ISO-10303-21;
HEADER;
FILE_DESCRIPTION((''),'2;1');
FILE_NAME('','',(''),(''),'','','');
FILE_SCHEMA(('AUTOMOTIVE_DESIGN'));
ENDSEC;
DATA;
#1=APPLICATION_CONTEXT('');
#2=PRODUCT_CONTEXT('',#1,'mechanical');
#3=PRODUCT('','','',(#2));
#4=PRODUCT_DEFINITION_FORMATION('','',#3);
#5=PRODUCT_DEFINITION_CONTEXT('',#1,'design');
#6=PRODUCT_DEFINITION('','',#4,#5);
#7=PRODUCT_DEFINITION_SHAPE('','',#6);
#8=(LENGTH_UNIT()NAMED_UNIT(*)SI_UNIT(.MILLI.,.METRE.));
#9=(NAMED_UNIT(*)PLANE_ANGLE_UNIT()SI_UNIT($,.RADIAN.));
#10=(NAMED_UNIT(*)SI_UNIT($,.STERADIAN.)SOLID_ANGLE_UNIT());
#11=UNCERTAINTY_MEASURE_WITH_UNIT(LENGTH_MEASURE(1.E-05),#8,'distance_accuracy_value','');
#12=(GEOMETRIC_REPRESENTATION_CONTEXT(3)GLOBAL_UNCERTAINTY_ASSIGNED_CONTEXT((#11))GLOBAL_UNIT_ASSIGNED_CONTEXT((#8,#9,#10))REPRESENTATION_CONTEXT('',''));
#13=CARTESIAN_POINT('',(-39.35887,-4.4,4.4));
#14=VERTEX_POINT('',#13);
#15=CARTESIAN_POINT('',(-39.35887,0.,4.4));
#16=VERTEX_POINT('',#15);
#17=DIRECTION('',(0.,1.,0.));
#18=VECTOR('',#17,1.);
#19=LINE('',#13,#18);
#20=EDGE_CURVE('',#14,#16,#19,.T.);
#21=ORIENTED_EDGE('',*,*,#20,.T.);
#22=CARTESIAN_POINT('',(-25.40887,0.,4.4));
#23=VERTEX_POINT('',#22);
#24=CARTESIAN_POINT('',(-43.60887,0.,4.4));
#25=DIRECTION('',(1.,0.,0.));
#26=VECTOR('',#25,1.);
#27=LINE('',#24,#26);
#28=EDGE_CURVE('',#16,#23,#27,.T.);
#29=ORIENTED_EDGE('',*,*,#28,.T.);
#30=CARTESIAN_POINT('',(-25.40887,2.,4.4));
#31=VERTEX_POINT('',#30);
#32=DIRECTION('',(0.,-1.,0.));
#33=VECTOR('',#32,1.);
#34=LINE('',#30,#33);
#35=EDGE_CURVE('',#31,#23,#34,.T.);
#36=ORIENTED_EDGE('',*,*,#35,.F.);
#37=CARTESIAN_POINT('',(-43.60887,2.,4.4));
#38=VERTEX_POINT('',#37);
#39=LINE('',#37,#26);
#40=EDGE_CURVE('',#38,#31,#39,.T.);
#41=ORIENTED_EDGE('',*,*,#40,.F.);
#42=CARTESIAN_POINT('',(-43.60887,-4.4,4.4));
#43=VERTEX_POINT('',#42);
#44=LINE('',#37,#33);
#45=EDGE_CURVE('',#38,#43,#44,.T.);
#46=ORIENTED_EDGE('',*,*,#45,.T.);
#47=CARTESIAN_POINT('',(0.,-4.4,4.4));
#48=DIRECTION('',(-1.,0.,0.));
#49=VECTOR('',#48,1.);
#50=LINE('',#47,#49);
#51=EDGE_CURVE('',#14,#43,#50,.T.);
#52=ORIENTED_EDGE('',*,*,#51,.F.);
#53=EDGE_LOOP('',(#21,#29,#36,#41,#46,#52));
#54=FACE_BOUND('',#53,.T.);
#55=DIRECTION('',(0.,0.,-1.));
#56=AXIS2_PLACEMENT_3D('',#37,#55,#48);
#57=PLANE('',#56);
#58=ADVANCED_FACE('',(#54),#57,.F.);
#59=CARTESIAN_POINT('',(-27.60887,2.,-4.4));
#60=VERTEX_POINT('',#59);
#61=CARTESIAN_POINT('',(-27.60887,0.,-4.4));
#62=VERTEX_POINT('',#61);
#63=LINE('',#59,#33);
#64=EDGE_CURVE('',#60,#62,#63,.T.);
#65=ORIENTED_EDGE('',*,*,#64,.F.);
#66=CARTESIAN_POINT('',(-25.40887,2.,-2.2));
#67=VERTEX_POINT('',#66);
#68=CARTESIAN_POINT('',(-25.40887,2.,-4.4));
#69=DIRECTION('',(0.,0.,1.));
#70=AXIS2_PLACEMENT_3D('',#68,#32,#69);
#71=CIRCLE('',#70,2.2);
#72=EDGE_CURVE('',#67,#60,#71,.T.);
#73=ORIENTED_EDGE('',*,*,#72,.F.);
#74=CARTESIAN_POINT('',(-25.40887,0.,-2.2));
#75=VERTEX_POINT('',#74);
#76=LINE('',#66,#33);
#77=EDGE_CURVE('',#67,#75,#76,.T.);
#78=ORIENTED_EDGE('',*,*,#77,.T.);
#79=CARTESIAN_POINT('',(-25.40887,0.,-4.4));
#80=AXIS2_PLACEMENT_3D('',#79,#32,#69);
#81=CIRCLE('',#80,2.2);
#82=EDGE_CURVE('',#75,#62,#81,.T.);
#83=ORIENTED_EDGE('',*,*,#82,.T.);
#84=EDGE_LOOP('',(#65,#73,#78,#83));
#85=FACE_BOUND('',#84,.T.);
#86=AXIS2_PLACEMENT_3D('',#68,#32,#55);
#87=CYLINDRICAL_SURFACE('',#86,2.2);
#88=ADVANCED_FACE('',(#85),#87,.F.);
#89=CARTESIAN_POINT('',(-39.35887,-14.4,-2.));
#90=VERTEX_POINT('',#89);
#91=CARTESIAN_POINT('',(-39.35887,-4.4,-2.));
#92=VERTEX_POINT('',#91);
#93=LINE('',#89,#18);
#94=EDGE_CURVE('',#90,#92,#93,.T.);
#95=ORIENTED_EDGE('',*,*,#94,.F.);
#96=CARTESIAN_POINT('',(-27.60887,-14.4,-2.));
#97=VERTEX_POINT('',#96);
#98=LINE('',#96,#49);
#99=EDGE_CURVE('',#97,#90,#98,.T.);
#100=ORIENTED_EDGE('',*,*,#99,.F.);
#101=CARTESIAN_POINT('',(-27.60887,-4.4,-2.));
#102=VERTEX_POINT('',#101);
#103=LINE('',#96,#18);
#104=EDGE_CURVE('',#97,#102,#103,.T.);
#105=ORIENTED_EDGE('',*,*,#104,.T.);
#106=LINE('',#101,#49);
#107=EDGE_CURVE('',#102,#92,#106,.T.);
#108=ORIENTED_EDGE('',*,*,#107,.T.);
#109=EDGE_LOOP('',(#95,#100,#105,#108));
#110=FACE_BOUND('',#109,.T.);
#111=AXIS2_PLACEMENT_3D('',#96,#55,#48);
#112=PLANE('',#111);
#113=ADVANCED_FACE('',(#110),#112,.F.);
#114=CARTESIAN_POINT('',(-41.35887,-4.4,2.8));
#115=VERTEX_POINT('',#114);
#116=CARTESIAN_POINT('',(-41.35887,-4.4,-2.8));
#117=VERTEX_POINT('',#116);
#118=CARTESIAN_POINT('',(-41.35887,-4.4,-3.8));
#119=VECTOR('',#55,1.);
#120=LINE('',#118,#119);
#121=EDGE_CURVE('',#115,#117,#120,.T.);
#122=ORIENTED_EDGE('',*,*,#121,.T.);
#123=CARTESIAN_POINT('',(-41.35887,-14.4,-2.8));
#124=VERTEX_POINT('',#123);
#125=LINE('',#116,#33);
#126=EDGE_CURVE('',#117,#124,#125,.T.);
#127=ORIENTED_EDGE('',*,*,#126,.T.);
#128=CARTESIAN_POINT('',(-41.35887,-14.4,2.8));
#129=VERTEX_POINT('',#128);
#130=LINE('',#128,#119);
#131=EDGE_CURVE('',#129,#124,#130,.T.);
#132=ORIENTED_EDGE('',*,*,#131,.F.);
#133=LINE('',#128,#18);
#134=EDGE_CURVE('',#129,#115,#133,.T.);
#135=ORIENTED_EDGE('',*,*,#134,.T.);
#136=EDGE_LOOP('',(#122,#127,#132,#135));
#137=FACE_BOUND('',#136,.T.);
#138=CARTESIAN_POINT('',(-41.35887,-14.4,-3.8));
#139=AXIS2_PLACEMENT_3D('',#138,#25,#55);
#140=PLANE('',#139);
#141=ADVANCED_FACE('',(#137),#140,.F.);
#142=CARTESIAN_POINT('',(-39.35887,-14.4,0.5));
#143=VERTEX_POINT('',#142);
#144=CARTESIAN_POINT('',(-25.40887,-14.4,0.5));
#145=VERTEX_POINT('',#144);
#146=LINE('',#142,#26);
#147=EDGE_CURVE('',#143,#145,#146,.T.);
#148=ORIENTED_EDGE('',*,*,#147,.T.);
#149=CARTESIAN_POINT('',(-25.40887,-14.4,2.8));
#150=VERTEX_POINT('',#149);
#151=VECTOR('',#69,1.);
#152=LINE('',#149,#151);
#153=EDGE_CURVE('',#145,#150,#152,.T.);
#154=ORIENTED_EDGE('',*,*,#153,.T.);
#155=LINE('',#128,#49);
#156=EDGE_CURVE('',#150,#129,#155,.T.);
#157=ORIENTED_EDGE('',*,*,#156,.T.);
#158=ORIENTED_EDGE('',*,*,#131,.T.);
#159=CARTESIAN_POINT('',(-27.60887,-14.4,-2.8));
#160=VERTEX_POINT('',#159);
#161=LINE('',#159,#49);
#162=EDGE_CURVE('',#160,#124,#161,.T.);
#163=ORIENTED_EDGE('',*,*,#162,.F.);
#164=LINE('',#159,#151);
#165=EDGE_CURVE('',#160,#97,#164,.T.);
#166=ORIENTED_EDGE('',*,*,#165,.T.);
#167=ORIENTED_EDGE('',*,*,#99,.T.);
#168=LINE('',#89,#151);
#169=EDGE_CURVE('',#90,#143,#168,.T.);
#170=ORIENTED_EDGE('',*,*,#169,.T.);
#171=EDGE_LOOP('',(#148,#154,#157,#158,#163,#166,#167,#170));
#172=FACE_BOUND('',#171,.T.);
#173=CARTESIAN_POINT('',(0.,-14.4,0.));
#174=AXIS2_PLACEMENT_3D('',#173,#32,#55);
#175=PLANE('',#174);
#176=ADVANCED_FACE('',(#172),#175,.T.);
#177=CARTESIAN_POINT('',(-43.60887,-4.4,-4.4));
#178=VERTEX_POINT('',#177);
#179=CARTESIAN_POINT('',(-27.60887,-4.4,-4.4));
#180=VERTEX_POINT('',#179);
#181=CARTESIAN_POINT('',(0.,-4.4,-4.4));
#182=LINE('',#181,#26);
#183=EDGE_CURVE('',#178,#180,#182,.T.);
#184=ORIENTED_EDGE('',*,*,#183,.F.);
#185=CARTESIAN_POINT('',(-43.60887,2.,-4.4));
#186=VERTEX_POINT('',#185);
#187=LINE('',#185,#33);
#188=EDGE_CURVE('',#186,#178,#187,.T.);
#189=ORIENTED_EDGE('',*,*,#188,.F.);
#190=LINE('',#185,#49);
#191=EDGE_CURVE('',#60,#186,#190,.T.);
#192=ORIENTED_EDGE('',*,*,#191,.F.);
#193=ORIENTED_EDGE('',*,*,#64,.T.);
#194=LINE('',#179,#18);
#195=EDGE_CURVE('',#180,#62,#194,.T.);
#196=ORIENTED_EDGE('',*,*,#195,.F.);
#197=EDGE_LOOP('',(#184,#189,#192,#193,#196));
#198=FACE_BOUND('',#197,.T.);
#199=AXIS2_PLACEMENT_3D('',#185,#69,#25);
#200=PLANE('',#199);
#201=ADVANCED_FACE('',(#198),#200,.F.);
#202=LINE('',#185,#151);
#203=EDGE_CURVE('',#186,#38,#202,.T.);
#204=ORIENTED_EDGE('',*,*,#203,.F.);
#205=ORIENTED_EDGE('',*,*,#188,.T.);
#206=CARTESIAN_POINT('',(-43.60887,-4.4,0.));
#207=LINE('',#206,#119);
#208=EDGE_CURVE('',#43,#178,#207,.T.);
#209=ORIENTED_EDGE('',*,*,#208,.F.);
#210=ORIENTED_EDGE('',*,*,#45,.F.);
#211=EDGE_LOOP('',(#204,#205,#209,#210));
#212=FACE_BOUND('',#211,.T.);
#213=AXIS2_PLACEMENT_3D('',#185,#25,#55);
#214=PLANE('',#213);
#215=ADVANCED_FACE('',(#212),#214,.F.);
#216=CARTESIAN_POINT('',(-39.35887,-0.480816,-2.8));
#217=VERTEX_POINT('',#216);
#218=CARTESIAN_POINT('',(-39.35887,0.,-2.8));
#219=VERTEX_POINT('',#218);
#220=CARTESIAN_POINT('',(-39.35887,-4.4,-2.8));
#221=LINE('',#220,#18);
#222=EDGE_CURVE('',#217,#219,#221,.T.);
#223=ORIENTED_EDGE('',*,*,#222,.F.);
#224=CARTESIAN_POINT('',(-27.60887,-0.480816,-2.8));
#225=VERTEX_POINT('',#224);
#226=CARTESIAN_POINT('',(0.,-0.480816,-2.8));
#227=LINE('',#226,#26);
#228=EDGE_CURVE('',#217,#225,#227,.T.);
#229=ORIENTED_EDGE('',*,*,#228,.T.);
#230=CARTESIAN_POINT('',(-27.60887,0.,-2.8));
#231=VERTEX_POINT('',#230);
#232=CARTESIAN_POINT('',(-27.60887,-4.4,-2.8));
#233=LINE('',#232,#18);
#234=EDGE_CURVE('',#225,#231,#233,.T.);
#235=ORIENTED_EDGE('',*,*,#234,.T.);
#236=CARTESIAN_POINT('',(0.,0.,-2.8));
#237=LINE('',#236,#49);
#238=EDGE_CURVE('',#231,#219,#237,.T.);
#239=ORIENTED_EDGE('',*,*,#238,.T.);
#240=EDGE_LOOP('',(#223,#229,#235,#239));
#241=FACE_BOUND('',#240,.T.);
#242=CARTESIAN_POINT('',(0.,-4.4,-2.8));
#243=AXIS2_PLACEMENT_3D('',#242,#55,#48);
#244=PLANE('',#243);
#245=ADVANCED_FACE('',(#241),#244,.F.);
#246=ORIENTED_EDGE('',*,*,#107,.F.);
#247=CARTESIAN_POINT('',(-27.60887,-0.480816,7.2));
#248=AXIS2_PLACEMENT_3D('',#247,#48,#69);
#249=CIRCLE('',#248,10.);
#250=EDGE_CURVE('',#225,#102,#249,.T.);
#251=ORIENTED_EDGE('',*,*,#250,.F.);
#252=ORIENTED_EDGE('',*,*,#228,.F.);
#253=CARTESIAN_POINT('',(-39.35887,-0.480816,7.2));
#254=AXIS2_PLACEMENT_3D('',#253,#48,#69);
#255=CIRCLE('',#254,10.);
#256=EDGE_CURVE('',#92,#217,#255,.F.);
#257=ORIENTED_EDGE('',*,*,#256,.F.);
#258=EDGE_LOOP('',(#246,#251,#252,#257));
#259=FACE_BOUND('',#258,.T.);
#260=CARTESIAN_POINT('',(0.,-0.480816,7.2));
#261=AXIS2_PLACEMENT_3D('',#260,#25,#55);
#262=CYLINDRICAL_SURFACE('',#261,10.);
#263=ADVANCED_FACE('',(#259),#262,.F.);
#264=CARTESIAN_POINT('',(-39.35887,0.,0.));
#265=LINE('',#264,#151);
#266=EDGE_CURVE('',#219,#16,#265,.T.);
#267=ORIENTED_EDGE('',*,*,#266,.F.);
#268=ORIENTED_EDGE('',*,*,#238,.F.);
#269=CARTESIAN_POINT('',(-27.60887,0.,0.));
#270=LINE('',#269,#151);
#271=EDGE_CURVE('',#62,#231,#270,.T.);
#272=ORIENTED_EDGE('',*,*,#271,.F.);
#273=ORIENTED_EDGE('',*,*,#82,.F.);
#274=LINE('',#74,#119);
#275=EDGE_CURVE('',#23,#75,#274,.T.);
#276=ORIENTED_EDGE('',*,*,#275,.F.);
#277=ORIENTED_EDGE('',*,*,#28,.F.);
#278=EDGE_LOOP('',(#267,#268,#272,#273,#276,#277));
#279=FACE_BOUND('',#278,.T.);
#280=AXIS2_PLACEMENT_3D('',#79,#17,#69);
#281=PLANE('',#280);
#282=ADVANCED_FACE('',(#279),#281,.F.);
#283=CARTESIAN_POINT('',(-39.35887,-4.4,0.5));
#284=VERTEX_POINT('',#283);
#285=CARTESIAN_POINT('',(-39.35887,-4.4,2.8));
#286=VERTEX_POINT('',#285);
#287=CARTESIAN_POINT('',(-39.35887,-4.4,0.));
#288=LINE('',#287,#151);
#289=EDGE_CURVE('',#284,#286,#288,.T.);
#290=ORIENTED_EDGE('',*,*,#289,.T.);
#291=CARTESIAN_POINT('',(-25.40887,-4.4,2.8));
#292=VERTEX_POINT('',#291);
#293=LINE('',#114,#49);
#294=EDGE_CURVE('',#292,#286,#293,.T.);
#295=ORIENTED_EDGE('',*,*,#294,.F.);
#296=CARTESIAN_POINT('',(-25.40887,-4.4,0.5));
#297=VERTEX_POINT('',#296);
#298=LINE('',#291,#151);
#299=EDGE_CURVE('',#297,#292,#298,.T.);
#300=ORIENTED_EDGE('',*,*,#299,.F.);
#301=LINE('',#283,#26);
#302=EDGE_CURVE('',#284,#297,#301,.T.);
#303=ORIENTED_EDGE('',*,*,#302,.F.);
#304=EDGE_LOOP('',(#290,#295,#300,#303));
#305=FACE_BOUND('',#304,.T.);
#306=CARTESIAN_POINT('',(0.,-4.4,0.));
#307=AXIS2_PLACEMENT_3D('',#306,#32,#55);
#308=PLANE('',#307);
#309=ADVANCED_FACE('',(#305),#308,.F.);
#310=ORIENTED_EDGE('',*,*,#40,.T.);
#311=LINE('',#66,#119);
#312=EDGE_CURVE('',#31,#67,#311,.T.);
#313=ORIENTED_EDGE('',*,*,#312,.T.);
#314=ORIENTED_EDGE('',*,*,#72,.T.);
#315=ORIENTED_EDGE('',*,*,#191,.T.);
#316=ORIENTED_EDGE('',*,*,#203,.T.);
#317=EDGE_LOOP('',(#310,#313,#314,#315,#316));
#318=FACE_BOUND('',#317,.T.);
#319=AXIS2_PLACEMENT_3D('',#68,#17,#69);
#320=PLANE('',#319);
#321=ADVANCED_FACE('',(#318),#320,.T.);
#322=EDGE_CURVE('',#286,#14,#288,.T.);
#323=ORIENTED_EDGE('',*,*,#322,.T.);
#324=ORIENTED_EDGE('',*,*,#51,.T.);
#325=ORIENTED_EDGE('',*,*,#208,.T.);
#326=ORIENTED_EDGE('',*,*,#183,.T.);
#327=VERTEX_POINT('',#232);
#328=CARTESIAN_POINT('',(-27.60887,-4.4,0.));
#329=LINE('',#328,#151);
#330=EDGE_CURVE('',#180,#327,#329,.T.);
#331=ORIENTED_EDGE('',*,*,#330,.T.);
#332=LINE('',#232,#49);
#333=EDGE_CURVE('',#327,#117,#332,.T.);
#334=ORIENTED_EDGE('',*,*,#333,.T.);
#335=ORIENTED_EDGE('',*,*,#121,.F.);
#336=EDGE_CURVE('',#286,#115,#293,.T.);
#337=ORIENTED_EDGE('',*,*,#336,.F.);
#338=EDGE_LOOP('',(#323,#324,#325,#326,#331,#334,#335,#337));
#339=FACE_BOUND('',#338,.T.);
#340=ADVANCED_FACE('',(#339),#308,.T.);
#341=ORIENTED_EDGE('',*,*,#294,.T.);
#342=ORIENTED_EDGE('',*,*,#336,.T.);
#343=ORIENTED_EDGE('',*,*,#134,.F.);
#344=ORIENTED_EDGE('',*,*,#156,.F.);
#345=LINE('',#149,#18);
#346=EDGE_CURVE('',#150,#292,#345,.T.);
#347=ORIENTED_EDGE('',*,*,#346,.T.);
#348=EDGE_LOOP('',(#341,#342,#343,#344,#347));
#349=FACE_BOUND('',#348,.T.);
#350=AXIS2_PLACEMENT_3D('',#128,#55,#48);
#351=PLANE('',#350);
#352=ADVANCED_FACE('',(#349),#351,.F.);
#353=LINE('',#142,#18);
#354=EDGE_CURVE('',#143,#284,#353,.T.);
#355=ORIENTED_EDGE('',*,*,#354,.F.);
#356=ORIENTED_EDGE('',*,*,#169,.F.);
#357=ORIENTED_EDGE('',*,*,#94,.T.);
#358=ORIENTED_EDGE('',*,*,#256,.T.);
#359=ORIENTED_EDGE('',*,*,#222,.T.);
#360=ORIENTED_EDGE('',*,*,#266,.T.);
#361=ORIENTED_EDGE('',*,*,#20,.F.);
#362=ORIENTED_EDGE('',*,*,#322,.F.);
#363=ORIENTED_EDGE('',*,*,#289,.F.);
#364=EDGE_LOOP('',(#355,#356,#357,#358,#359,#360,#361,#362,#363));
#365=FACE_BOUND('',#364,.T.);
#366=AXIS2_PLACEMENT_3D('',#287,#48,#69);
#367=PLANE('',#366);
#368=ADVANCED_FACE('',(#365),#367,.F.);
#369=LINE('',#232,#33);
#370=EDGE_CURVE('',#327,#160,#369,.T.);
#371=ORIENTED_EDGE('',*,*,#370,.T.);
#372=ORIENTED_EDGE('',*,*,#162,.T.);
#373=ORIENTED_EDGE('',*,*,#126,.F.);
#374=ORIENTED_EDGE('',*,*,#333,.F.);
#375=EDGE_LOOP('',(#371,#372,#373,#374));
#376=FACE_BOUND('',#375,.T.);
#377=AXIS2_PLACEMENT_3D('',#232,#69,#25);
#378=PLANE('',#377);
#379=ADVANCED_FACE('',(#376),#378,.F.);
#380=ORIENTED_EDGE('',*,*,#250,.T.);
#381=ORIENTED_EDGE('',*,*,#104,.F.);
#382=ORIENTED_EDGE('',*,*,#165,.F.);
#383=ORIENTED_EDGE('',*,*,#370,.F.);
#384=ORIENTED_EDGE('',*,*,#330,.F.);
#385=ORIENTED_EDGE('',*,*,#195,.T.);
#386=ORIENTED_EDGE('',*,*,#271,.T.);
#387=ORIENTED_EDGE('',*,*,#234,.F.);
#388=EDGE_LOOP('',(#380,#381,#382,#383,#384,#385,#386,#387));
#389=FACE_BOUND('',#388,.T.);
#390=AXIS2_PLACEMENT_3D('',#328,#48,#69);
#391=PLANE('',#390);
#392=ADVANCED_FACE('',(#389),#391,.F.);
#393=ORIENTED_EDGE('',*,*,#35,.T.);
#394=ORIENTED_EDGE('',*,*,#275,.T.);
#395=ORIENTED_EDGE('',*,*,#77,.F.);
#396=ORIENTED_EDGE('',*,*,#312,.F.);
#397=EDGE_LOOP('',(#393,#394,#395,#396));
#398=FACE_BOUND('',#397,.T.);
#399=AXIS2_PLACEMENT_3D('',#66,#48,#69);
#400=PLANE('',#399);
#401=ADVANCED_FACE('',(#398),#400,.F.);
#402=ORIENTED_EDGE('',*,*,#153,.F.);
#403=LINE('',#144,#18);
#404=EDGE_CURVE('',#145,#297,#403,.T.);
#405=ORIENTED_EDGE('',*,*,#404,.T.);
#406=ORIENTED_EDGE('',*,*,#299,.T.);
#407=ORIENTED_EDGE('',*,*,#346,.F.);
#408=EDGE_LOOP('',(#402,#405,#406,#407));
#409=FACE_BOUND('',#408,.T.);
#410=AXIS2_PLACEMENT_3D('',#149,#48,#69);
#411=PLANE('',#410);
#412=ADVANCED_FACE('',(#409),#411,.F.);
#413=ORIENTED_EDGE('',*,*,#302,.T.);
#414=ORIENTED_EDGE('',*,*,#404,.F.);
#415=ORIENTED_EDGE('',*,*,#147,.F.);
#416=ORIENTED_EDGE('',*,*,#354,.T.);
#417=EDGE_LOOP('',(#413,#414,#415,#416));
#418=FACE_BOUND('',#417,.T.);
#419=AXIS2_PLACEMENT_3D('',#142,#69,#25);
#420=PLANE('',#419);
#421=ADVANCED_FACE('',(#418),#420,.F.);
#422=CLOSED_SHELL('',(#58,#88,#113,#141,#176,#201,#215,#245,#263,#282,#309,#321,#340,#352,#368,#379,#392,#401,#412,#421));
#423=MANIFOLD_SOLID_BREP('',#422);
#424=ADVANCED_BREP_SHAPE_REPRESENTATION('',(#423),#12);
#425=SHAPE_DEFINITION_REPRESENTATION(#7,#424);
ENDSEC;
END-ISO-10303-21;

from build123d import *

# Parameters (mm, degrees)
BOSS_EXTRUDE1_DEPTH = 2
BOSS_EXTRUDE2_DEPTH = 4.4
BOSS_EXTRUDE9_DEPTH = 10
FILLET1_R           = 10
SKETCH6_W           = 13.75
SKETCH6_H           = 1
CUT_EXTRUDE2_DEPTH  = 10


with BuildPart() as part:
    # Sketch1 → Boss-Extrude1 (new body)
    with BuildSketch(Plane(origin=(0, 0, 0), x_dir=(1, 0, 0), z_dir=(0, 1, 0))):
        with BuildLine():
            Line((-43.608869745, 4.4), (-27.608869745, 4.4))
            ThreePointArc((-27.608869745, 4.4), (-26.964504664, 2.844365081), (-25.408869745, 2.2))
            Line((-25.408869745, 2.2), (-25.408869745, -4.4))
            Line((-25.408869745, -4.4), (-43.608869745, -4.4))
            Line((-43.608869745, -4.4), (-43.608869745, 4.4))
        make_face()
    extrude(amount=BOSS_EXTRUDE1_DEPTH)

    # Sketch2 → Boss-Extrude2 (add)
    with BuildSketch(Plane.XZ):
        Polygon((-39.358869745, -4.4), (-27.608869745, -4.4), (-27.608869745, -2.8), (-39.358869745, -2.8), (-39.358869745, 4.4), (-43.608869745, 4.4), (-43.608869745, -4.4), align=None)
    extrude(amount=BOSS_EXTRUDE2_DEPTH)

    # Sketch3 → Boss-Extrude9 (add)
    with BuildSketch(Plane.XZ.offset(4.4)):
        Polygon((-41.358869745, 2.8), (-25.408869745, 2.8), (-25.408869745, 0.5), (-39.358869745, 0.5), (-39.358869745, -2), (-27.608869745, -2), (-27.608869745, -2.8), (-27.608869745, -3.8), (-41.358869745, -3.8), (-41.358869745, -2.8), align=None)
    extrude(amount=BOSS_EXTRUDE9_DEPTH)

    # Fillet1
    # the kernel refuses this fillet: 10 mm, written as the material it adds along each edge
    with BuildSketch(Plane(origin=(-27.608869745, -4.4, -2.8), x_dir=(0, 1, 0), z_dir=(-1, 0, 0))) as fillet1_piece_1_section:
        with BuildLine():
            CenterArc((3.919183588, -10), FILLET1_R, 90, 23.073918066)
            Line((0, -0.8), (0, 0))
            Line((0, 0), (3.919183588, 0))
        make_face()
    fillet1_piece_1 = extrude(amount=21.547958971, mode=Mode.PRIVATE)
    fillet1_piece_1 = split(fillet1_piece_1, bisect_by=Plane(origin=(-41.358869745, -4.4, -2.8), z_dir=(1, 0, 0)), keep=Keep.TOP, mode=Mode.PRIVATE)
    add(fillet1_piece_1)

    # Sketch6 → Cut-Extrude2 (cut)
    with BuildSketch(Plane.XZ.offset(14.4)):
        with Locations((-34.483869745, -3.3)):
            Rectangle(SKETCH6_W, SKETCH6_H)
    extrude(amount=-CUT_EXTRUDE2_DEPTH, mode=Mode.SUBTRACT)


solid = part.part
